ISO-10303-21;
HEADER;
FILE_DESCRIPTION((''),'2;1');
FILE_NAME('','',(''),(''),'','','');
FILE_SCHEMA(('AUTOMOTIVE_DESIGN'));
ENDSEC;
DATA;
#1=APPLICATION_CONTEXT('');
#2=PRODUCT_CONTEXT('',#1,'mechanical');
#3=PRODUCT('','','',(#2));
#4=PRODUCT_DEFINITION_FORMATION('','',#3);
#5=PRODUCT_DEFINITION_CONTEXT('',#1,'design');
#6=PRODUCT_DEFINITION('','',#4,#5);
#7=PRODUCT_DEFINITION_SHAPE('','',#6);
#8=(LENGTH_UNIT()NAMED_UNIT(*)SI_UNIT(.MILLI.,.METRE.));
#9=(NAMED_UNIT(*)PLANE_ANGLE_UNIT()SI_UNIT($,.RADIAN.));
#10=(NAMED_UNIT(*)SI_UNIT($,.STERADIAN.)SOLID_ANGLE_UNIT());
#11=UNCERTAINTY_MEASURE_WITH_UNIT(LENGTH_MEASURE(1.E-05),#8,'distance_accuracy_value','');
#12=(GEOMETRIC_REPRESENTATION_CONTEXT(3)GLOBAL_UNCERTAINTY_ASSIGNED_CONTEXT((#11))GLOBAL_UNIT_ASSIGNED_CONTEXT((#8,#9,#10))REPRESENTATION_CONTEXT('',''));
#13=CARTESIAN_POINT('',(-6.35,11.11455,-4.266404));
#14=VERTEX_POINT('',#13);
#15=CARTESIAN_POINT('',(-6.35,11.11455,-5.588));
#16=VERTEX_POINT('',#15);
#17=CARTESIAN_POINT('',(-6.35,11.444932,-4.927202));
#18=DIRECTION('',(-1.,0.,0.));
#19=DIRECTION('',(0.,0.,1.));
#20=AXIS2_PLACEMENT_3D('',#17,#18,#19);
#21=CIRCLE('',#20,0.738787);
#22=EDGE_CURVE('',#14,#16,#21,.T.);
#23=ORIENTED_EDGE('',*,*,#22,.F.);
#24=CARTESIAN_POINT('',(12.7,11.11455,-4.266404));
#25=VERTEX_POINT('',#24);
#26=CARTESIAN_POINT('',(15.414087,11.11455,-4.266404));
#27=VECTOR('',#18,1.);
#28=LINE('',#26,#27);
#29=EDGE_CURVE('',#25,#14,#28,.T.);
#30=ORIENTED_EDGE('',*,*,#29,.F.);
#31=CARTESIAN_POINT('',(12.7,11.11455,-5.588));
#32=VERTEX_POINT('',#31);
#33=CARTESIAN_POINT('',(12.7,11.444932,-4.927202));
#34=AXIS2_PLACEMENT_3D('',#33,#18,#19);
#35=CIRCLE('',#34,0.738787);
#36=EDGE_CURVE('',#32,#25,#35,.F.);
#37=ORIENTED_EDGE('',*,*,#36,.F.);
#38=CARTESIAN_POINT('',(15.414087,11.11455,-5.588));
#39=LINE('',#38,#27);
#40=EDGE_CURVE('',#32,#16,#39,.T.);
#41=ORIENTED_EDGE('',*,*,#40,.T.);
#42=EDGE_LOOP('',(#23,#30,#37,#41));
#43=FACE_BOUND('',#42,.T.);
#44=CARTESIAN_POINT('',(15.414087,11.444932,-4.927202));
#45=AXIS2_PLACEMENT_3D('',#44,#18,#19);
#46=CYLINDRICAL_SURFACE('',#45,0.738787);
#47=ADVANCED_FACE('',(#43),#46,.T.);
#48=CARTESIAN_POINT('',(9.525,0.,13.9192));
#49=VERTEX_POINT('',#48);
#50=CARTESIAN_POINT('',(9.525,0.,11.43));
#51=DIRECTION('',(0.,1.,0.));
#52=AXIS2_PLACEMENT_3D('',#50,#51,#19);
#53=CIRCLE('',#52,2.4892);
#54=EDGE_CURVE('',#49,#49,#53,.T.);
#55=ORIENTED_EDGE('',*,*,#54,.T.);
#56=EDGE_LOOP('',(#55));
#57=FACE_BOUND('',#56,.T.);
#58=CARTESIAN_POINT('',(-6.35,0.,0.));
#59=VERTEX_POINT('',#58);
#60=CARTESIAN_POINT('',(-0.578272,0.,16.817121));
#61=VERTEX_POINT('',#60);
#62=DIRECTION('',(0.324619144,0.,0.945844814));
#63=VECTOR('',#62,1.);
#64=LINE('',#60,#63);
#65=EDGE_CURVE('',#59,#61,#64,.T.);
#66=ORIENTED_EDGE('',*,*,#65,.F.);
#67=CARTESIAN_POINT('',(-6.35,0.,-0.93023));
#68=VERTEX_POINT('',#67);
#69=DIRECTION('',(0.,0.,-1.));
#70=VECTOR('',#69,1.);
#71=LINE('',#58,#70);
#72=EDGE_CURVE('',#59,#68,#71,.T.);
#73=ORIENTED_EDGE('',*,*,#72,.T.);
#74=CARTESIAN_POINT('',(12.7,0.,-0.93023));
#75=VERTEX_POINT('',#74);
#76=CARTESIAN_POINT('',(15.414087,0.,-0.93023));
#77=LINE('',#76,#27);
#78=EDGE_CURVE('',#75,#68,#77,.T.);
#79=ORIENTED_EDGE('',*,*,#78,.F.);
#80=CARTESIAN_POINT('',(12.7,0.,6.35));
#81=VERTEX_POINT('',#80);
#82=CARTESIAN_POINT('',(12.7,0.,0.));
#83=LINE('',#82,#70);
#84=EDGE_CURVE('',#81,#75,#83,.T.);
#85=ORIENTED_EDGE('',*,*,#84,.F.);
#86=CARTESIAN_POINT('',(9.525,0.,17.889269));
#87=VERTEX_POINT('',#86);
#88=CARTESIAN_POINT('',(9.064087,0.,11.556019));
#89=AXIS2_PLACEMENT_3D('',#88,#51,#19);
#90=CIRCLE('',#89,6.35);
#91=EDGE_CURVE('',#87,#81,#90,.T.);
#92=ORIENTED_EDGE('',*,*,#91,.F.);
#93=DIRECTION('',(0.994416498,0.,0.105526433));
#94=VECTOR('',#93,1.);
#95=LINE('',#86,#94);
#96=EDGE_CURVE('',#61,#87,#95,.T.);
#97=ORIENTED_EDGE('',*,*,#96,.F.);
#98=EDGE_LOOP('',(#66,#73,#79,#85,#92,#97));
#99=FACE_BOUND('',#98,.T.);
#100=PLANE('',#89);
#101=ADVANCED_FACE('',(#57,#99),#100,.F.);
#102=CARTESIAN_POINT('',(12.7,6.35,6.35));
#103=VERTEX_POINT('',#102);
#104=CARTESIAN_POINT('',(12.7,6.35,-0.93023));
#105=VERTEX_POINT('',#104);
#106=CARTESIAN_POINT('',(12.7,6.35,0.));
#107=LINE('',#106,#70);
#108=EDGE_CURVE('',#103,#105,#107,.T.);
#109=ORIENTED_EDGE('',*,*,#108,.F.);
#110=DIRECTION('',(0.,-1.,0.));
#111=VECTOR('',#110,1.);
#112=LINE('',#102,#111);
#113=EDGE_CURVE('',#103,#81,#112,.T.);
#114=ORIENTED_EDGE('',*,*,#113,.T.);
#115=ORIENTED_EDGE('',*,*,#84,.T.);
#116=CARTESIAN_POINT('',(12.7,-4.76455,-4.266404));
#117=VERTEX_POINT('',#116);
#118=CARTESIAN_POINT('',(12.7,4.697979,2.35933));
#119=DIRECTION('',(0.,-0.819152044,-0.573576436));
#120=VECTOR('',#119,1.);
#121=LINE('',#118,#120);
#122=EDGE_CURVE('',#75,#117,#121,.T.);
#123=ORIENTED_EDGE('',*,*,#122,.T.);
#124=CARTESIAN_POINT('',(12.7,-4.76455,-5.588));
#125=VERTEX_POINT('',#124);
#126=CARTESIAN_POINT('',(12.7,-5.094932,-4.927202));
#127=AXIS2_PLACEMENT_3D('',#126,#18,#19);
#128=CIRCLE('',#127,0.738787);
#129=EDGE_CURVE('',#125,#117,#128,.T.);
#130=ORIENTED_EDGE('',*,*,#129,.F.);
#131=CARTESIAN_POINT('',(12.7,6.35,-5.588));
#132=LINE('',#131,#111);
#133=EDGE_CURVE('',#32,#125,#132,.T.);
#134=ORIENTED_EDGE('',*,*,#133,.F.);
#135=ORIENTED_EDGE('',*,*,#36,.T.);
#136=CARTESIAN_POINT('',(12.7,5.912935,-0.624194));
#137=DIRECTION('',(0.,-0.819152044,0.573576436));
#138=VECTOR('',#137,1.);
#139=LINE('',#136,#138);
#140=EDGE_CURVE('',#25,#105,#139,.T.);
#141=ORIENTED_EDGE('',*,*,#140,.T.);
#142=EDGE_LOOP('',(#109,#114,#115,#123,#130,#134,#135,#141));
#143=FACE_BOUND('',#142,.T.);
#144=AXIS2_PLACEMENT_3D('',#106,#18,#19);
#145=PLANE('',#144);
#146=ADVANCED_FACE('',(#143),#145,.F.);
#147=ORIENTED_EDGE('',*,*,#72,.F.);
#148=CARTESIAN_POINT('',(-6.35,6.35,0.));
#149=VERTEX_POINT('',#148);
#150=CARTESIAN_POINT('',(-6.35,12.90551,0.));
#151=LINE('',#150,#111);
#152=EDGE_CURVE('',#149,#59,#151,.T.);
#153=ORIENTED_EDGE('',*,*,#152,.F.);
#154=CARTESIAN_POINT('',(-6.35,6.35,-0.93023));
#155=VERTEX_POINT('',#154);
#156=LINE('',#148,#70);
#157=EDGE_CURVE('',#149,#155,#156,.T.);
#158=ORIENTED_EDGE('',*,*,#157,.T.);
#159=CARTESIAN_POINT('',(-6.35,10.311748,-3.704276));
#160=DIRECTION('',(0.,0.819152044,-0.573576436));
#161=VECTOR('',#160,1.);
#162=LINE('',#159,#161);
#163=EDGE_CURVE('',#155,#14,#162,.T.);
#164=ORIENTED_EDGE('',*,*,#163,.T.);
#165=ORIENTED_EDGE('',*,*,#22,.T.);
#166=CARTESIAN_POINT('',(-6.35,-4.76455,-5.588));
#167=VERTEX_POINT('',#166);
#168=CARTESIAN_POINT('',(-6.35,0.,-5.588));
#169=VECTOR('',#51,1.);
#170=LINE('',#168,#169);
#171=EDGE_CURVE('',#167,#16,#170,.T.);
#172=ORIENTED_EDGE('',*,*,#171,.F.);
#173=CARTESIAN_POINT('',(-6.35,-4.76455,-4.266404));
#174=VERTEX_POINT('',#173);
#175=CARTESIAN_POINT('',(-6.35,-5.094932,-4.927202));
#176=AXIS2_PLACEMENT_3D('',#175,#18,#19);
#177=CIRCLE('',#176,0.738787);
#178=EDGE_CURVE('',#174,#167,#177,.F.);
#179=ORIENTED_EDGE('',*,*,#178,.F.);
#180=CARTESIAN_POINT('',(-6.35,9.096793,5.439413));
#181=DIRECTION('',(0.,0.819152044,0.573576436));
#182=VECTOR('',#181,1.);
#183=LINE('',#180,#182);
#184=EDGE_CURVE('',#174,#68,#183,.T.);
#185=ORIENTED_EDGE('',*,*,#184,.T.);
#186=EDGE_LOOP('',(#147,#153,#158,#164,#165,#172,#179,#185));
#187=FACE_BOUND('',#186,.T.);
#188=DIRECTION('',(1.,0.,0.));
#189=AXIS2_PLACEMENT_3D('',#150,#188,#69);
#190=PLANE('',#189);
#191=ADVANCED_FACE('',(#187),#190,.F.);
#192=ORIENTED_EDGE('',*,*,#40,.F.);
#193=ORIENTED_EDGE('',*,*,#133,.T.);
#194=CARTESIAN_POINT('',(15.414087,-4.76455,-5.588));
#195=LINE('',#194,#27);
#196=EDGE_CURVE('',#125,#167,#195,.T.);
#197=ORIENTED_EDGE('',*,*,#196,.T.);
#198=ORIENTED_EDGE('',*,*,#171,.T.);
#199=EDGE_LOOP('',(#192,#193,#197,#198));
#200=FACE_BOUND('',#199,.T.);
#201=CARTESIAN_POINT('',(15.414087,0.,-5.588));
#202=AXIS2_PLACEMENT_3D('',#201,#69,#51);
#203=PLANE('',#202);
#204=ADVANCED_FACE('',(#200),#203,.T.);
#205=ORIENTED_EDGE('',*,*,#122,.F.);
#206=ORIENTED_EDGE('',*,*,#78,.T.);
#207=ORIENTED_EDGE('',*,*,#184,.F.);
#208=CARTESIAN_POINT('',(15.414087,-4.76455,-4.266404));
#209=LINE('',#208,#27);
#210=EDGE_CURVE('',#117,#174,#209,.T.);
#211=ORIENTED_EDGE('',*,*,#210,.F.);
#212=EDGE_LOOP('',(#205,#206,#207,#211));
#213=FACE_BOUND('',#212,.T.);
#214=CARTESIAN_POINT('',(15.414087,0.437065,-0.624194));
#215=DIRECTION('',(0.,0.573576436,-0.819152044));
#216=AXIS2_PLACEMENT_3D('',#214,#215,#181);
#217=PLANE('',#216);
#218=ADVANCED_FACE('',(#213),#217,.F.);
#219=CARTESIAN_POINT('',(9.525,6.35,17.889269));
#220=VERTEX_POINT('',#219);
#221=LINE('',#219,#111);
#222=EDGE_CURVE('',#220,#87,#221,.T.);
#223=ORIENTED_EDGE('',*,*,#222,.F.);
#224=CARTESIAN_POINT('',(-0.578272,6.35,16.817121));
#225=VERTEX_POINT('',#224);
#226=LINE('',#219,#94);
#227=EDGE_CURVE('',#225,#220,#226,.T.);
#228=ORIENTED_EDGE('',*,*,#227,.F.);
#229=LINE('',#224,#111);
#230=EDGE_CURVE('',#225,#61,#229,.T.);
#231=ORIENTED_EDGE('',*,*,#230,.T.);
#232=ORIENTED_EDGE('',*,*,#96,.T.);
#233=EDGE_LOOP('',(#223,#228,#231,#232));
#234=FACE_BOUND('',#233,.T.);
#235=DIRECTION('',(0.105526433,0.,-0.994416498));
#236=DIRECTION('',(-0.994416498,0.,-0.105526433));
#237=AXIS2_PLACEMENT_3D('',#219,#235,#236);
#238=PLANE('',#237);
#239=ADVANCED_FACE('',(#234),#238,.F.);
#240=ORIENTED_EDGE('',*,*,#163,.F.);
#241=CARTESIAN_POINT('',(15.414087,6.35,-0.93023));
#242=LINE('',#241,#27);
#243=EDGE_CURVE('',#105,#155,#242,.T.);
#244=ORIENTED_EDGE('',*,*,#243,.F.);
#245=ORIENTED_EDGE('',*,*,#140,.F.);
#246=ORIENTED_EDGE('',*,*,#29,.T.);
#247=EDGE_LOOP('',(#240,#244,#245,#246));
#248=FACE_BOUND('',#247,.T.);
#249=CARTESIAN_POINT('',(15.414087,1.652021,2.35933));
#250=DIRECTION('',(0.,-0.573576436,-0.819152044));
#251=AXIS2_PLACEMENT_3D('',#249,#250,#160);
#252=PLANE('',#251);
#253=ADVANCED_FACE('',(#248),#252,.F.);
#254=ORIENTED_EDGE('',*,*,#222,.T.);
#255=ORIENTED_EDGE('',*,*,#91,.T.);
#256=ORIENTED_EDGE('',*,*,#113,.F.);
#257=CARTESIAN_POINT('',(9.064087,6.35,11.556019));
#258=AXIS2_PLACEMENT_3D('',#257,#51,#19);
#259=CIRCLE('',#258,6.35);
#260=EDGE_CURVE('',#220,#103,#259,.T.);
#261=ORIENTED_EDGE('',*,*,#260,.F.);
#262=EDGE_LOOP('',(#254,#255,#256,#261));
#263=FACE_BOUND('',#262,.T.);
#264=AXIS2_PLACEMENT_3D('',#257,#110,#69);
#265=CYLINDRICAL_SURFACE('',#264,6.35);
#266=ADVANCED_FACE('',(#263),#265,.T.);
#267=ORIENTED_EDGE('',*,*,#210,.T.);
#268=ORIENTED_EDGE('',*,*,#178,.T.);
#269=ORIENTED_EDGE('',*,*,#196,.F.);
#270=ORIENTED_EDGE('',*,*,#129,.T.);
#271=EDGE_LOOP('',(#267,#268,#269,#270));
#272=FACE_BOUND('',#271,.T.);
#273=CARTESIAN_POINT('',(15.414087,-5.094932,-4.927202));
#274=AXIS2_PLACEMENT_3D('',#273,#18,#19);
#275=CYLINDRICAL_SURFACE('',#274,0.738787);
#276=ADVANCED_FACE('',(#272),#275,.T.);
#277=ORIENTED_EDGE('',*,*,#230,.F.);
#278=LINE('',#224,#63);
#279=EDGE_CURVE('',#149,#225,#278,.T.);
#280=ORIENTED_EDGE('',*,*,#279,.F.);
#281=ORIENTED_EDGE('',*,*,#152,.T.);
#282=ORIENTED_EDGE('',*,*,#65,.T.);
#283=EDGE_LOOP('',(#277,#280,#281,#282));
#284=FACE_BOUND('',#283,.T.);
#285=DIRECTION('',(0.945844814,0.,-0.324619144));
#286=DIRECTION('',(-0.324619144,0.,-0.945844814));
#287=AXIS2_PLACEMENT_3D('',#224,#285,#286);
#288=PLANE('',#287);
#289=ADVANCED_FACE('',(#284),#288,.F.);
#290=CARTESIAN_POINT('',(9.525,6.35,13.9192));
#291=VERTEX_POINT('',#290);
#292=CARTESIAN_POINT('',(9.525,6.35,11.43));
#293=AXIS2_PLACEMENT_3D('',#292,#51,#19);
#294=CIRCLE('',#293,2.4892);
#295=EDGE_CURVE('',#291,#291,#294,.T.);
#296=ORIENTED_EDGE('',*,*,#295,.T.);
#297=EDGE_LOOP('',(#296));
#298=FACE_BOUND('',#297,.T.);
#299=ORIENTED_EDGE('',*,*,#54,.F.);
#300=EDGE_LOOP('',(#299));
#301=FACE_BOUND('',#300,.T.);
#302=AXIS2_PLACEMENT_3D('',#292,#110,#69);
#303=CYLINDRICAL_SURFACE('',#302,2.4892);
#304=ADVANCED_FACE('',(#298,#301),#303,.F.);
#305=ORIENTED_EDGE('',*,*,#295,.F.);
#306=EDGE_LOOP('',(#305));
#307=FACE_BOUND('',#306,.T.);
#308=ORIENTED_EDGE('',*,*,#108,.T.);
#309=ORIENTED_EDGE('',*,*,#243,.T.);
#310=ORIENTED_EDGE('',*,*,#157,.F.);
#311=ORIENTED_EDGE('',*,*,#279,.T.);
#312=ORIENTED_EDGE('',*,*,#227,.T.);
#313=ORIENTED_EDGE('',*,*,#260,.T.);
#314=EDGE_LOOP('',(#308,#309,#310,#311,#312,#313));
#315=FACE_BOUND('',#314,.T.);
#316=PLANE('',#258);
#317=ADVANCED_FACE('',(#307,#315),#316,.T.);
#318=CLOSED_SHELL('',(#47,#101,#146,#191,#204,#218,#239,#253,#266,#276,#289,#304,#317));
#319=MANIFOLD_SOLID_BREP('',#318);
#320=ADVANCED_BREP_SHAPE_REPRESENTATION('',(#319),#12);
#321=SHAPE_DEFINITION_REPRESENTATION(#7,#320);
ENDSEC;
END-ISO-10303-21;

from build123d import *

# Parameters (mm, degrees)
SKETCH1_R               = 2.4892
BOSS_EXTRUDE1_DEPTH     = 6.35
BOSS_EXTRUDE2_START     = -6.35
BOSS_EXTRUDE2_DEPTH     = 19.05
BOSS_EXTRUDE2_START_2   = -6.555460136
BOSS_EXTRUDE2_2_DEPTH   = 19.460920272
BOSS_EXTRUDE2_START_3   = -10
BOSS_EXTRUDE2_3_DEPTH   = 3.65
CUT_EXTRUDE1_DEPTH      = 27.910448217
CUT_EXTRUDE1_DEPTH_BACK = 27.910448217
SKETCH3_W               = 2.179354936
SKETCH3_H               = 6.35
CUT_EXTRUDE2_DEPTH      = 31.98795935
CUT_EXTRUDE2_DEPTH_BACK = 31.98795935


with BuildPart() as part:
    # Sketch1 → Boss-Extrude1 (new body)
    with BuildSketch(Plane(origin=(0, 0, 0), x_dir=(1, 0, 0), z_dir=(0, 1, 0))):
        with BuildLine():
            Line((9.525, -17.889269346), (-0.578271622, -16.817120786))
            Line((-0.578271622, -16.817120786), (-6.35, 0))
            Line((-6.35, 0), (12.7, 0))
            Line((12.7, 0), (12.7, -6.35))
            ThreePointArc((12.7, -6.35), (15.186560179, -13.240601753), (9.525, -17.889269346))
        make_face()
        with Locations(Location((9.525, -11.43, 0), (0, 0, 270))):
            Circle(SKETCH1_R, mode=Mode.SUBTRACT)
    extrude(amount=BOSS_EXTRUDE1_DEPTH)

    # Boss-Extrude2: read off the stored shape, not the designer's step
    # Boss-Extrude2 outline → Boss-Extrude2 (add)
    with BuildSketch(Plane.YZ.offset(BOSS_EXTRUDE2_START)):
        with BuildLine():
            ThreePointArc((11.551615481, -6.35), (12.905510296, -4.996105185), (11.551615481, -3.642210371))
            Line((11.551615481, -3.642210371), (6.35, 0))
            Line((6.35, 0), (0, 0))
            Line((0, 0), (-5.201615481, -3.642210371))
            ThreePointArc((-5.201615481, -3.642210371), (-6.555510296, -4.996105185), (-5.201615481, -6.35))
            Line((-5.201615481, -6.35), (11.551615481, -6.35))
        make_face()
    extrude(amount=BOSS_EXTRUDE2_DEPTH)

    # Boss-Extrude2 2 outline → Boss-Extrude2 2 (add)
    with BuildSketch(Plane(origin=(0, 0, 0), x_dir=(1, 0, 0), z_dir=(0, 1, 0)).offset(BOSS_EXTRUDE2_START_2)):
        Polygon((-8.529354936, 6.35), (-6.35, 0), (-6.35, 6.35), align=None)
    extrude(amount=BOSS_EXTRUDE2_2_DEPTH)

    # Boss-Extrude2 3 outline → Boss-Extrude2 3 (cut)
    with BuildSketch(Plane.YZ.offset(BOSS_EXTRUDE2_START_3)):
        with BuildLine():
            Line((12.905460136, 0), (6.35, 0))
            Line((6.35, 0), (11.551615481, -3.642210371))
            ThreePointArc((11.551615481, -3.642210371), (12.504834401, -4.034645431), (12.905460136, -4.984450993))
            Line((12.905460136, -4.984450993), (12.905460136, 0))
        make_face()
        with BuildLine():
            ThreePointArc((12.905460136, -5.007759378), (12.504834401, -5.95756494), (11.551615481, -6.35))
            Line((11.551615481, -6.35), (12.905460136, -6.35))
            Line((12.905460136, -6.35), (12.905460136, -5.007759378))
        make_face()
        with BuildLine():
            Line((0, 0), (-6.555460136, 0))
            Line((-6.555460136, 0), (-6.555460136, -4.984450993))
            ThreePointArc((-6.555460136, -4.984450993), (-6.154834401, -4.034645431), (-5.201615481, -3.642210371))
            Line((-5.201615481, -3.642210371), (0, 0))
        make_face()
        with BuildLine():
            ThreePointArc((-5.201615481, -6.35), (-6.154834401, -5.95756494), (-6.555460136, -5.007759378))
            Line((-6.555460136, -5.007759378), (-6.555460136, -6.35))
            Line((-6.555460136, -6.35), (-5.201615481, -6.35))
        make_face()
    extrude(amount=BOSS_EXTRUDE2_3_DEPTH, mode=Mode.SUBTRACT)

    # Sketch3 → Cut-Extrude1 (cut, two sides: drawn at the far end of the back side and taken through both)
    with BuildSketch(Plane.XZ.offset(-CUT_EXTRUDE1_DEPTH_BACK)):
        with Locations((-7.439677468, -3.175)):
            Rectangle(SKETCH3_W, SKETCH3_H)
    extrude(amount=CUT_EXTRUDE1_DEPTH + CUT_EXTRUDE1_DEPTH_BACK, mode=Mode.SUBTRACT)

    # Sketch4 → Cut-Extrude2 (cut, two sides: drawn at the far end of the back side and taken through both)
    with BuildSketch(Plane.ZY.offset(6.35).offset(-CUT_EXTRUDE2_DEPTH_BACK)):
        with BuildLine():
            ThreePointArc((-5.588, -4.764550237), (-4.927202114, -5.833718802), (-4.266404229, -4.764550237))
            Line((-4.266404229, -4.764550237), (-0.930230237, 0))
            Line((-0.930230237, 0), (0, 0))
            Line((0, 0), (-3.642210371, -5.201615481))
            ThreePointArc((-3.642210371, -5.201615481), (-4.996105185, -6.555510296), (-6.35, -5.201615481))
            Line((-6.35, -5.201615481), (-6.35, 11.551615481))
            ThreePointArc((-6.35, 11.551615481), (-4.996105185, 12.905510296), (-3.642210371, 11.551615481))
            Line((-3.642210371, 11.551615481), (0, 6.35))
            Line((0, 6.35), (-0.930230237, 6.35))
            Line((-0.930230237, 6.35), (-4.266404229, 11.114550237))
            ThreePointArc((-4.266404229, 11.114550237), (-4.927202114, 12.183718802), (-5.588, 11.114550237))
            Line((-5.588, 11.114550237), (-5.588, -4.764550237))
        make_face()
    extrude(amount=CUT_EXTRUDE2_DEPTH + CUT_EXTRUDE2_DEPTH_BACK, mode=Mode.SUBTRACT)


solid = part.part
